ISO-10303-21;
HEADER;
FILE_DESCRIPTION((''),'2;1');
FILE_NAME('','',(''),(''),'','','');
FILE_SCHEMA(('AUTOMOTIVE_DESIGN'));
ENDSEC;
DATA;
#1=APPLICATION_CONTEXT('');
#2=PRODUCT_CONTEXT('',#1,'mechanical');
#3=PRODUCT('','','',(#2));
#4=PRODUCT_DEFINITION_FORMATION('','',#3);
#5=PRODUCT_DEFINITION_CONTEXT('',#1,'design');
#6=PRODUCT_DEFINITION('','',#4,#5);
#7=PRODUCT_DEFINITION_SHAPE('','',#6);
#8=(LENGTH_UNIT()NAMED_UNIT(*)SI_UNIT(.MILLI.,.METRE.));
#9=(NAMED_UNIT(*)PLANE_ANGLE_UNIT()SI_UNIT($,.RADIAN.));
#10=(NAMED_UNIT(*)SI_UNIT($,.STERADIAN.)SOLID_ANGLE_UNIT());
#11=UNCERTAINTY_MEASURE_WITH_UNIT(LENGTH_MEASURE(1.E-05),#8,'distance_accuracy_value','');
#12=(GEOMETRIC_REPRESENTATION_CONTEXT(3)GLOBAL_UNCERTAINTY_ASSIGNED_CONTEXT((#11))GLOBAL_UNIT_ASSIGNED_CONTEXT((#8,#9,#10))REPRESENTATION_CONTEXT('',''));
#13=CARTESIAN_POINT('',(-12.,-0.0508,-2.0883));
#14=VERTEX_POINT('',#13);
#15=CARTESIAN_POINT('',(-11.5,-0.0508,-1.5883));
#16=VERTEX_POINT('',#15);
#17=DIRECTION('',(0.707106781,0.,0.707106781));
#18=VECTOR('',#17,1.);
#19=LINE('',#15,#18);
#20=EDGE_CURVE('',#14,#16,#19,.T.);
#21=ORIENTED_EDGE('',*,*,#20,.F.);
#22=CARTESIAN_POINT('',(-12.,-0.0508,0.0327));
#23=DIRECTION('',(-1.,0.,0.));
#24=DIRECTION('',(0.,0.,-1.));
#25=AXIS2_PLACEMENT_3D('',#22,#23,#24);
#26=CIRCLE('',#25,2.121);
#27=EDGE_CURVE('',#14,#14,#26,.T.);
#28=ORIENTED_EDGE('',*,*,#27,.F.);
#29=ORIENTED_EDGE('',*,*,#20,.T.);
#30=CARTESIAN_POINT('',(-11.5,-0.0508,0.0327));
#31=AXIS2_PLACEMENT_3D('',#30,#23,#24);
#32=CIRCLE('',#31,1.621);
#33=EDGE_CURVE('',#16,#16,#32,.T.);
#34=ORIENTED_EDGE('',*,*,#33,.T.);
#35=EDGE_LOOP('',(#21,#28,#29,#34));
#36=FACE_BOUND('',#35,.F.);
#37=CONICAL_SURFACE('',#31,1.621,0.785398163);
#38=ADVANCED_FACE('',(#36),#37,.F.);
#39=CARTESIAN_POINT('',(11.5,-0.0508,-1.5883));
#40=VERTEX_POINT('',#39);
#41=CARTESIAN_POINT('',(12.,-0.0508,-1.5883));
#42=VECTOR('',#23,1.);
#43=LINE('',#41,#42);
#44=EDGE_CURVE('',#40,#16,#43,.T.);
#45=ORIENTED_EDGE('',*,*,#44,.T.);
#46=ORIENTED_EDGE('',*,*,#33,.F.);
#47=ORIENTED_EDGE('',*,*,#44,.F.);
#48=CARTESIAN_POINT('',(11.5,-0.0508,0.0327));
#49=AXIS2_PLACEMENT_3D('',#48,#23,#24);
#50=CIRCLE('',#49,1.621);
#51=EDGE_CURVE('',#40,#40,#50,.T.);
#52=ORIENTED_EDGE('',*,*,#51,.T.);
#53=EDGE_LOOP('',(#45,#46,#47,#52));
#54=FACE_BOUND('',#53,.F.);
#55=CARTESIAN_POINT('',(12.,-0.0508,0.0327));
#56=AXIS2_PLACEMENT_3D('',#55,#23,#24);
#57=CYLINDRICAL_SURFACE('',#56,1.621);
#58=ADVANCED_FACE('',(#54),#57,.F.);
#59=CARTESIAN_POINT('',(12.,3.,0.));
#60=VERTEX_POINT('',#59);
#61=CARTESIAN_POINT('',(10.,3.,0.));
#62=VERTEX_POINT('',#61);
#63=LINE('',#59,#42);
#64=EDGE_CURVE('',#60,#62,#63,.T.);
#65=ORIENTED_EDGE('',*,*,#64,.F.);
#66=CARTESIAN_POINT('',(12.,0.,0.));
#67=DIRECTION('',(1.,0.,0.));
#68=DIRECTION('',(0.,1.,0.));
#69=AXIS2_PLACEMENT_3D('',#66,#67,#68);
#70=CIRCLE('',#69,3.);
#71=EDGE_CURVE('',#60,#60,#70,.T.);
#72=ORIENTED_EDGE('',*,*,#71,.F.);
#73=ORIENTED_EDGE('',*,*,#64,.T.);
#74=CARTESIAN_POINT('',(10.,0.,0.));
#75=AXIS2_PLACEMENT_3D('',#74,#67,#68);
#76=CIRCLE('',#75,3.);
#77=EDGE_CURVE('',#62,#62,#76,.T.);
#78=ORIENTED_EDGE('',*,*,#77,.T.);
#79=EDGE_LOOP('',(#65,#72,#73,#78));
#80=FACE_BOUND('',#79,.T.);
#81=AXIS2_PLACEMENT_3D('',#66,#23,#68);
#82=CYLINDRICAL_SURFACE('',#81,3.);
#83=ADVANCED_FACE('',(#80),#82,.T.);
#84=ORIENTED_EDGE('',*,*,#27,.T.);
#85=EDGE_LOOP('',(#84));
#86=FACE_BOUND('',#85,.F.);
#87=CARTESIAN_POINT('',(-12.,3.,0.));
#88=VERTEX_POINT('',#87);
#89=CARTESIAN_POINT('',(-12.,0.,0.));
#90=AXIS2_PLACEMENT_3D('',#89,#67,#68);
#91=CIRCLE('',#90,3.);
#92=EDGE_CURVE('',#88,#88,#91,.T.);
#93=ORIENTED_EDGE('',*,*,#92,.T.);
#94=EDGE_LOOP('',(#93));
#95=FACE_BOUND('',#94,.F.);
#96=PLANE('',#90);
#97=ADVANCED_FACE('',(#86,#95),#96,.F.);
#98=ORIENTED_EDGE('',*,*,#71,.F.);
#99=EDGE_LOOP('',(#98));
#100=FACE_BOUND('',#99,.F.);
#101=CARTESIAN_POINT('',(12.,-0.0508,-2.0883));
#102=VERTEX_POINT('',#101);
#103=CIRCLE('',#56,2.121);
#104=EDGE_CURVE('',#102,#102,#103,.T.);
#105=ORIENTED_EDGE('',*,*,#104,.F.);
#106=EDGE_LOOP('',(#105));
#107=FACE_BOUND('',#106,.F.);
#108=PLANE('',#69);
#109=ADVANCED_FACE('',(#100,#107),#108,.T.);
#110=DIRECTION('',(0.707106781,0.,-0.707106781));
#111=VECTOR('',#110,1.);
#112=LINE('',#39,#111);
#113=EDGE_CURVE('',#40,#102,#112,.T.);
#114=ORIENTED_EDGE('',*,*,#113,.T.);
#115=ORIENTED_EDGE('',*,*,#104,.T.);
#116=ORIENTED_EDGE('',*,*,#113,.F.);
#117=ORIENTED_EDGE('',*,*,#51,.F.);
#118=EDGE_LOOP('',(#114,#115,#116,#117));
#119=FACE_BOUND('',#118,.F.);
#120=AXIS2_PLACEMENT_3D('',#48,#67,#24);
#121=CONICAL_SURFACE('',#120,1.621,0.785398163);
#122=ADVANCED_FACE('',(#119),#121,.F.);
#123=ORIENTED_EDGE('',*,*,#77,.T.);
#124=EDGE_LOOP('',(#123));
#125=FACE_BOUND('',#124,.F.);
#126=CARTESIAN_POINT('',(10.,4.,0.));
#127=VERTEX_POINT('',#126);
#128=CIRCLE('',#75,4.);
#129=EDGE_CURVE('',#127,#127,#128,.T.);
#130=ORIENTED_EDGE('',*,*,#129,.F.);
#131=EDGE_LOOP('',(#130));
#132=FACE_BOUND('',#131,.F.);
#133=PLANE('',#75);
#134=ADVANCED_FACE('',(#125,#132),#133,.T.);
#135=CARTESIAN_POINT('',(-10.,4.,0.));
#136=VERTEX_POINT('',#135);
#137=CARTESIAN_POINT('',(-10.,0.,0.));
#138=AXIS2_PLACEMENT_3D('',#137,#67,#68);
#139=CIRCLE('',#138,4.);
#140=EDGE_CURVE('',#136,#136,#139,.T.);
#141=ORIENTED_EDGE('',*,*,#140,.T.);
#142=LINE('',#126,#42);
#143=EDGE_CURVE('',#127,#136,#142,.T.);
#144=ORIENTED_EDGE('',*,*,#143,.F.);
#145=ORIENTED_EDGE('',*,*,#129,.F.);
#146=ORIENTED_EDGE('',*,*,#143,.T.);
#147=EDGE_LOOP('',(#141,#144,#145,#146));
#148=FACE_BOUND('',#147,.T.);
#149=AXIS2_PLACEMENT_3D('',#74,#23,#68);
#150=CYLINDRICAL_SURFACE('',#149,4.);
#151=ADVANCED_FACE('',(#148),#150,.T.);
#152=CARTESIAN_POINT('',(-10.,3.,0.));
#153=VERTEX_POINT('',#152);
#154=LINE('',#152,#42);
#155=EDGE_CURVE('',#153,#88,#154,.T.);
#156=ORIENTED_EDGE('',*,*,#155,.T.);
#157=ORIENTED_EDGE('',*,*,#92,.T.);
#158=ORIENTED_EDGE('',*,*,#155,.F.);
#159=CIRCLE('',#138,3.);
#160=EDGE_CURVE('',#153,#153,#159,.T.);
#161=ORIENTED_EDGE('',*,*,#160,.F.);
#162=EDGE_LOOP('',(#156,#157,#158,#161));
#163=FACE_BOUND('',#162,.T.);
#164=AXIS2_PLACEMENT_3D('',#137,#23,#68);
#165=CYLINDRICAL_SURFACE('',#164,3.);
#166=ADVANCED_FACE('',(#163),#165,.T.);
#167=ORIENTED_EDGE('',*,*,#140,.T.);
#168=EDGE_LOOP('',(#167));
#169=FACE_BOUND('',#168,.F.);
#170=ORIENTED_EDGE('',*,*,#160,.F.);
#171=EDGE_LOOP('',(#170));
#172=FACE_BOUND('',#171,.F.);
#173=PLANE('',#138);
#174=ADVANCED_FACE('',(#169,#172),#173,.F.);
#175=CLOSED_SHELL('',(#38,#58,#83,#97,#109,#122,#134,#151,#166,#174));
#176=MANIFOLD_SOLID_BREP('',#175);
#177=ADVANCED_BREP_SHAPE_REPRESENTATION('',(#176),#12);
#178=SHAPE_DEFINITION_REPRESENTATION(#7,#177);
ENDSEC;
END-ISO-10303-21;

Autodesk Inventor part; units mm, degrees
ref_plane "YZ Plane" through (0, 0, 0) normal (1, 0, 0) x (0, 1, 0)
ref_plane "XZ Plane" through (0, 0, 0) normal (0, 1, 0) x (-1, 0, 0)
ref_plane "XY Plane" through (0, 0, 0) normal (0, 0, 1) x (1, 0, 0)
sketch "Sketch1" plane through (0, 0, 0) normal (0, 0, 1) x (1, 0, 0)
  line L0 (-12, 0) -> (12, 0)
  line L1 (12, 0) -> (12, 3)
  line L2 (12, 3) -> (10, 3)
  line L3 (10, 3) -> (10, 4)
  line L4 (10, 4) -> (-10, 4)
  line L5 (-10, 4) -> (-10, 3)
  line L6 (-10, 3) -> (-12, 3)
  line L7 (-12, 3) -> (-12, 0)
  point P0 (0, 0)
  point P1 (0, 0)
  dimension "d0" = 24
  dimension "d1" = 6
  dimension "d2" = 8
  dimension "d3" = 2
revolve "Revolution1" add sketch "Sketch1" angle 360 about axis through (-12, 0, 0) along (1, 0, 0)
sketch "Sketch2" plane through (12, 0, 0) normal (1, 0, 0) x (0, 0, -1)
  point P0 (0, 0)
  point P1 (-0.1005, -0.6753)
  point P2 (-0.0327, -0.0508)
hole "Hole1" at (12, -0.0508, 0.0327) direction (-1, 0, 0) diameter 3.242 end up to surface thread size "M4x0.7" class "6H" standard "ISO Metric profile"
chamfer "Chamfer1" distance 0.5 angle 45 2 edges at (12, -0.0508, 1.6537) (-12, -0.0508, 1.6537)
properties part number "BaseSupport" material "Steel, Mild"
